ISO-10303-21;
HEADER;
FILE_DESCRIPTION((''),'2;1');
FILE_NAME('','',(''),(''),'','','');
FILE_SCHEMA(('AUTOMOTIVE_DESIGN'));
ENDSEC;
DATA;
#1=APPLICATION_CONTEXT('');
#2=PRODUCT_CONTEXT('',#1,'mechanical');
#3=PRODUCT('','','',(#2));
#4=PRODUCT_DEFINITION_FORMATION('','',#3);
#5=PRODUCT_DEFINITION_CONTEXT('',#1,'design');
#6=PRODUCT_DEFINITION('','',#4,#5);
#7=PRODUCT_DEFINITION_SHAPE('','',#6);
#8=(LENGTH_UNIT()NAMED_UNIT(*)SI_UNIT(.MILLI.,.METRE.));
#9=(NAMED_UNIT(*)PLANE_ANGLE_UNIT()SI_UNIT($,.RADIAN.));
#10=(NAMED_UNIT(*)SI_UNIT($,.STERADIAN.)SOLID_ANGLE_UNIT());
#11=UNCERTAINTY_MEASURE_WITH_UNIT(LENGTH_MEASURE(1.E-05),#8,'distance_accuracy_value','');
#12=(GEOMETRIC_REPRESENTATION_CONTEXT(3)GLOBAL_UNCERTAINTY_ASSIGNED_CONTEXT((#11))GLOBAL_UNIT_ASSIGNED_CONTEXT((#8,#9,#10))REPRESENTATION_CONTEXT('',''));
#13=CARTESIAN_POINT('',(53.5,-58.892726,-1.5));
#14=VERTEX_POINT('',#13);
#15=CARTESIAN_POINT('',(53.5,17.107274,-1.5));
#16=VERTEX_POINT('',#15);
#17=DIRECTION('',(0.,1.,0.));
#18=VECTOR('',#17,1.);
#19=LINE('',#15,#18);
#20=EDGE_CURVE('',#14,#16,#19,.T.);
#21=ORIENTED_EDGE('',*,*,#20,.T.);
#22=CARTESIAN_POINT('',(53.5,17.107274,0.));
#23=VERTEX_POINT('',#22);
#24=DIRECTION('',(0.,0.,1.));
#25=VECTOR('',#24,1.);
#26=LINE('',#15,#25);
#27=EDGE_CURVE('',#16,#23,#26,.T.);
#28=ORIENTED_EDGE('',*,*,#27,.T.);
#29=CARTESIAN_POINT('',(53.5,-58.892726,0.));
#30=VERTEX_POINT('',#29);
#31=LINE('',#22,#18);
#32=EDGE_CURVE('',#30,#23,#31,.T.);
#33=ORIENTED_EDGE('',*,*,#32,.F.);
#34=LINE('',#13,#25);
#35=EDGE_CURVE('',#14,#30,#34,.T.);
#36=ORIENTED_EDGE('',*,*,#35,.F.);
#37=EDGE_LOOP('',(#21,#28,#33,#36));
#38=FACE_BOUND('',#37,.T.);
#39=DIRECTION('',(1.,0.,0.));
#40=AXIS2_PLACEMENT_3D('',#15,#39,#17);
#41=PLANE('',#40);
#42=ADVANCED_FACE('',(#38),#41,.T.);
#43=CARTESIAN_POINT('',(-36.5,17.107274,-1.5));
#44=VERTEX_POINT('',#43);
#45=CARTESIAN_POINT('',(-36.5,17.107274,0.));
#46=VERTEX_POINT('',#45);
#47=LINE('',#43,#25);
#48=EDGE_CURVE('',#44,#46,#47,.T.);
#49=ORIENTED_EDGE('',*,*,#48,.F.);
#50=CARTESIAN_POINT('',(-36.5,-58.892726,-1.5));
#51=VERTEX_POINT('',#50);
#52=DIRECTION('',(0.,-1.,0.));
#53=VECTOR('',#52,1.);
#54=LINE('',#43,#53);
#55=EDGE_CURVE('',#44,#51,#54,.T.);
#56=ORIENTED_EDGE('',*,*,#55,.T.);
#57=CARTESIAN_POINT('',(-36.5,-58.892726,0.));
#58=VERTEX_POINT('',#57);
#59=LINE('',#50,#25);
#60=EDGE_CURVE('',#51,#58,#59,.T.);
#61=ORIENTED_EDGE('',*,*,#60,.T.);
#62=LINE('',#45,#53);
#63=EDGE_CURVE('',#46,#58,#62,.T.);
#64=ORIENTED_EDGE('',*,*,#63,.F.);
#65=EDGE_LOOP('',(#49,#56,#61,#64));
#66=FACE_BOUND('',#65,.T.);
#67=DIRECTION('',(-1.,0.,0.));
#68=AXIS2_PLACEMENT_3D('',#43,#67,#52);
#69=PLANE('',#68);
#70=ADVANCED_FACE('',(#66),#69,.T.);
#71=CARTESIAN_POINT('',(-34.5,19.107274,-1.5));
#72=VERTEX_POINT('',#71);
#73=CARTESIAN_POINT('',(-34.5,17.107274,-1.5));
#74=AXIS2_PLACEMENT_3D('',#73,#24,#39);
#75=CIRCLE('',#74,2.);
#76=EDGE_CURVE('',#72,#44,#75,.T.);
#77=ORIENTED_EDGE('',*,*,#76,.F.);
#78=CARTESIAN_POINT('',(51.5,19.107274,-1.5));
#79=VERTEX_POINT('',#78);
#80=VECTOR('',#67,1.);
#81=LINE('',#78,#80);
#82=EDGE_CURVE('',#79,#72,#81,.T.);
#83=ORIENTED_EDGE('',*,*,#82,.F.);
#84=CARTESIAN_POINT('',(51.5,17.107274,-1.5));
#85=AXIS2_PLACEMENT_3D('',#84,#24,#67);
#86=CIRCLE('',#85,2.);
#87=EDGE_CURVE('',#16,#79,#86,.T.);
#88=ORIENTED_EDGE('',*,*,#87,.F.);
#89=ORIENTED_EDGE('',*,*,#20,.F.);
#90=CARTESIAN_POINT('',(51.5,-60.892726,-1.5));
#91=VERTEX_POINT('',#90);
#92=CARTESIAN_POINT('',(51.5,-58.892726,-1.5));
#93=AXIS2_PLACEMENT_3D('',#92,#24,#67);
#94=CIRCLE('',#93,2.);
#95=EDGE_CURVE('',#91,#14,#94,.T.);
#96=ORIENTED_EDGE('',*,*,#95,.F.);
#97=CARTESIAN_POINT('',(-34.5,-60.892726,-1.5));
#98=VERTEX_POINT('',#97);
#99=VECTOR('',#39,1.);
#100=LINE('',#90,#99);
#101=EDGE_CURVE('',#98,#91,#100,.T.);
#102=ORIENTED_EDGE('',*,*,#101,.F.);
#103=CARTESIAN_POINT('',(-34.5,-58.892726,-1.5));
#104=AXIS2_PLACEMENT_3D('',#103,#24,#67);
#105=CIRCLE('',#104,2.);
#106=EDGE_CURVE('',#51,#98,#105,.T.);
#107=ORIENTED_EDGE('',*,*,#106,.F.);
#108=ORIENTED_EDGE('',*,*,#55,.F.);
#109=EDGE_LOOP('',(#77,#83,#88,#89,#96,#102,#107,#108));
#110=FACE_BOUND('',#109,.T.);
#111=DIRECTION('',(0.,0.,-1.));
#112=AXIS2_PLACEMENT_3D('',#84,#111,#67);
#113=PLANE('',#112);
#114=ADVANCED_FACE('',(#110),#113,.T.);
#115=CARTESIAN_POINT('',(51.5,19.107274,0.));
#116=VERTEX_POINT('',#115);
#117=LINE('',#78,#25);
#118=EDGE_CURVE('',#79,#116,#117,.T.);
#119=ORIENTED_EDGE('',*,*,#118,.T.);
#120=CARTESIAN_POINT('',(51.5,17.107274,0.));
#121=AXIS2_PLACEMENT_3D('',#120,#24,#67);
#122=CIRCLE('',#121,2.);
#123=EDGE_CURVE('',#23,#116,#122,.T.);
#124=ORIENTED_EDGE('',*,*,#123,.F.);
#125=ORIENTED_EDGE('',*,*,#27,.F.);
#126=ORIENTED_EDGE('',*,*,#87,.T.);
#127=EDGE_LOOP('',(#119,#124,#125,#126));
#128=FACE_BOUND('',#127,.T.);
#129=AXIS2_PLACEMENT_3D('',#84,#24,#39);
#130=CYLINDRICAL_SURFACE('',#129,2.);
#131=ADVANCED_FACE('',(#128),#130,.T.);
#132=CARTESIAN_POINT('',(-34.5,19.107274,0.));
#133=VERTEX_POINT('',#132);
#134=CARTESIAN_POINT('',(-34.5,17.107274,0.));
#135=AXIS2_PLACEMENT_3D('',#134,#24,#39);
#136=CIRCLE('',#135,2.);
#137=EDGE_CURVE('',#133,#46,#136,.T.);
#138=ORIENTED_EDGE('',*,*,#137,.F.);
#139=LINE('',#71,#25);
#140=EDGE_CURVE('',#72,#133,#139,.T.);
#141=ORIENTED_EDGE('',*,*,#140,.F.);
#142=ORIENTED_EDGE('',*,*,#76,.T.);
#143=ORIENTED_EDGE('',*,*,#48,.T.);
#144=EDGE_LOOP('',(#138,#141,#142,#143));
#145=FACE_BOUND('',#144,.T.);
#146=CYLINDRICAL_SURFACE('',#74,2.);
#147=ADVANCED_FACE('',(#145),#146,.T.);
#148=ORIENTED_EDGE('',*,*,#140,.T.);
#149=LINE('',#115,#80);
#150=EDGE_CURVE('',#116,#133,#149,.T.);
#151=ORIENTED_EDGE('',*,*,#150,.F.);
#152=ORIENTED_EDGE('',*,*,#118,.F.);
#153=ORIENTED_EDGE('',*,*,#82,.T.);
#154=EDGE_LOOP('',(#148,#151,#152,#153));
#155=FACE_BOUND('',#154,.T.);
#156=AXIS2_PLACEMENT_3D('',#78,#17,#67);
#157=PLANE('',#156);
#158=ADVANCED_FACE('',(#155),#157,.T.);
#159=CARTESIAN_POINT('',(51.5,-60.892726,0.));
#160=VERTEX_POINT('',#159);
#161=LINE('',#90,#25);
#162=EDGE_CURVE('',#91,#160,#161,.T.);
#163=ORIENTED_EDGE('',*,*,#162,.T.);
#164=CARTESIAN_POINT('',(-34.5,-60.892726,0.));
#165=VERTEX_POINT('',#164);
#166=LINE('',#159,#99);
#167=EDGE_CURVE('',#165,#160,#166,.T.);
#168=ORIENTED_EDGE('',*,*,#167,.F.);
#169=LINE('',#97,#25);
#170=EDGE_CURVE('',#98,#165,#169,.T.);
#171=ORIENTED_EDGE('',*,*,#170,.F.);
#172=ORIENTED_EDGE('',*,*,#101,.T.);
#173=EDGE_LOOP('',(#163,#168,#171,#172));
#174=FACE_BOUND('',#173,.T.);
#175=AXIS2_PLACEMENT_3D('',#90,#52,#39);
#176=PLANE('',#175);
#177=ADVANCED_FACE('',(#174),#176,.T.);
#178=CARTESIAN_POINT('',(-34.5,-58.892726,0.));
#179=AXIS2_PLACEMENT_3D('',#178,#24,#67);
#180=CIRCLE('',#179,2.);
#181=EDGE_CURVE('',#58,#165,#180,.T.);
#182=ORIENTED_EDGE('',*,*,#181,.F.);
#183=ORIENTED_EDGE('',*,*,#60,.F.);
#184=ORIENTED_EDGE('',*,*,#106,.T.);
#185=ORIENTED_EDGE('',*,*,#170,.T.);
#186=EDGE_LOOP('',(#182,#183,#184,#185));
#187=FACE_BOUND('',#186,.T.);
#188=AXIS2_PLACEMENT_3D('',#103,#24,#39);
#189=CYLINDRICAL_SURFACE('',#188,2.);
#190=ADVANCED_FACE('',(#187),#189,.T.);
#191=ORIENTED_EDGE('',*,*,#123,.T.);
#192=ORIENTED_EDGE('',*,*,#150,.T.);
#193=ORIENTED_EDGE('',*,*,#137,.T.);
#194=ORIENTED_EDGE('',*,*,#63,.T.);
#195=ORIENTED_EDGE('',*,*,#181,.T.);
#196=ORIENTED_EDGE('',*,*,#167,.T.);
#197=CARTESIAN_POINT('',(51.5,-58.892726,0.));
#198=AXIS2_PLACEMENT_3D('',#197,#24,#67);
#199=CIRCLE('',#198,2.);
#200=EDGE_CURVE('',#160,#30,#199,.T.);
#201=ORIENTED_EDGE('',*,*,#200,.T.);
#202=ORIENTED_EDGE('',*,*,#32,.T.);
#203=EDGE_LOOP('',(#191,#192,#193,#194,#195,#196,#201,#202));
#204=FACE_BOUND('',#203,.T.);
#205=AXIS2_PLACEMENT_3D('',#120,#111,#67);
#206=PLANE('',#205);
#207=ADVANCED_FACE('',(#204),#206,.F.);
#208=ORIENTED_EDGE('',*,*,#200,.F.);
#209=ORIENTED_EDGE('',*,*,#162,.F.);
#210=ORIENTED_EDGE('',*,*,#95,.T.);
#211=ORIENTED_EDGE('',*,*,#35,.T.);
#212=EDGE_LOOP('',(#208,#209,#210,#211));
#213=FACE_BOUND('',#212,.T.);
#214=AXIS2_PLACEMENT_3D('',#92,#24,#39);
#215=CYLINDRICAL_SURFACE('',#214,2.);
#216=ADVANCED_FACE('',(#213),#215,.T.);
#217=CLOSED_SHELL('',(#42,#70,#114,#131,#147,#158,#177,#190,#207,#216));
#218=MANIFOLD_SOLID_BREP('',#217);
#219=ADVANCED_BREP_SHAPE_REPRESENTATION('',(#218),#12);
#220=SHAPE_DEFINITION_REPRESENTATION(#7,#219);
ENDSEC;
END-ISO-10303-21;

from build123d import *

# Parameters (mm, degrees)
SM_BASE_FLANGE_1_DEPTH = 1.5


# Sheet-metal steps are written as plain solids
with BuildPart() as part:
    # Sketch 1 → Базовая кромка1 (new body)
    with BuildSketch(Plane.XY):
        with BuildLine():
            Line((51.5, 19.107274431), (-34.5, 19.107274431))
            ThreePointArc((-34.5, 19.107274431), (-35.914213562, 18.521487993), (-36.5, 17.107274431))
            Line((-36.5, 17.107274431), (-36.5, -58.892725569))
            ThreePointArc((-36.5, -58.892725569), (-35.914213562, -60.306939132), (-34.5, -60.892725569))
            Line((-34.5, -60.892725569), (51.5, -60.892725569))
            ThreePointArc((51.5, -60.892725569), (52.914213562, -60.306939132), (53.5, -58.892725569))
            Line((53.5, -58.892725569), (53.5, 17.107274431))
            ThreePointArc((53.5, 17.107274431), (52.914213562, 18.521487993), (51.5, 19.107274431))
        make_face()
    extrude(amount=-SM_BASE_FLANGE_1_DEPTH)


solid = part.part
